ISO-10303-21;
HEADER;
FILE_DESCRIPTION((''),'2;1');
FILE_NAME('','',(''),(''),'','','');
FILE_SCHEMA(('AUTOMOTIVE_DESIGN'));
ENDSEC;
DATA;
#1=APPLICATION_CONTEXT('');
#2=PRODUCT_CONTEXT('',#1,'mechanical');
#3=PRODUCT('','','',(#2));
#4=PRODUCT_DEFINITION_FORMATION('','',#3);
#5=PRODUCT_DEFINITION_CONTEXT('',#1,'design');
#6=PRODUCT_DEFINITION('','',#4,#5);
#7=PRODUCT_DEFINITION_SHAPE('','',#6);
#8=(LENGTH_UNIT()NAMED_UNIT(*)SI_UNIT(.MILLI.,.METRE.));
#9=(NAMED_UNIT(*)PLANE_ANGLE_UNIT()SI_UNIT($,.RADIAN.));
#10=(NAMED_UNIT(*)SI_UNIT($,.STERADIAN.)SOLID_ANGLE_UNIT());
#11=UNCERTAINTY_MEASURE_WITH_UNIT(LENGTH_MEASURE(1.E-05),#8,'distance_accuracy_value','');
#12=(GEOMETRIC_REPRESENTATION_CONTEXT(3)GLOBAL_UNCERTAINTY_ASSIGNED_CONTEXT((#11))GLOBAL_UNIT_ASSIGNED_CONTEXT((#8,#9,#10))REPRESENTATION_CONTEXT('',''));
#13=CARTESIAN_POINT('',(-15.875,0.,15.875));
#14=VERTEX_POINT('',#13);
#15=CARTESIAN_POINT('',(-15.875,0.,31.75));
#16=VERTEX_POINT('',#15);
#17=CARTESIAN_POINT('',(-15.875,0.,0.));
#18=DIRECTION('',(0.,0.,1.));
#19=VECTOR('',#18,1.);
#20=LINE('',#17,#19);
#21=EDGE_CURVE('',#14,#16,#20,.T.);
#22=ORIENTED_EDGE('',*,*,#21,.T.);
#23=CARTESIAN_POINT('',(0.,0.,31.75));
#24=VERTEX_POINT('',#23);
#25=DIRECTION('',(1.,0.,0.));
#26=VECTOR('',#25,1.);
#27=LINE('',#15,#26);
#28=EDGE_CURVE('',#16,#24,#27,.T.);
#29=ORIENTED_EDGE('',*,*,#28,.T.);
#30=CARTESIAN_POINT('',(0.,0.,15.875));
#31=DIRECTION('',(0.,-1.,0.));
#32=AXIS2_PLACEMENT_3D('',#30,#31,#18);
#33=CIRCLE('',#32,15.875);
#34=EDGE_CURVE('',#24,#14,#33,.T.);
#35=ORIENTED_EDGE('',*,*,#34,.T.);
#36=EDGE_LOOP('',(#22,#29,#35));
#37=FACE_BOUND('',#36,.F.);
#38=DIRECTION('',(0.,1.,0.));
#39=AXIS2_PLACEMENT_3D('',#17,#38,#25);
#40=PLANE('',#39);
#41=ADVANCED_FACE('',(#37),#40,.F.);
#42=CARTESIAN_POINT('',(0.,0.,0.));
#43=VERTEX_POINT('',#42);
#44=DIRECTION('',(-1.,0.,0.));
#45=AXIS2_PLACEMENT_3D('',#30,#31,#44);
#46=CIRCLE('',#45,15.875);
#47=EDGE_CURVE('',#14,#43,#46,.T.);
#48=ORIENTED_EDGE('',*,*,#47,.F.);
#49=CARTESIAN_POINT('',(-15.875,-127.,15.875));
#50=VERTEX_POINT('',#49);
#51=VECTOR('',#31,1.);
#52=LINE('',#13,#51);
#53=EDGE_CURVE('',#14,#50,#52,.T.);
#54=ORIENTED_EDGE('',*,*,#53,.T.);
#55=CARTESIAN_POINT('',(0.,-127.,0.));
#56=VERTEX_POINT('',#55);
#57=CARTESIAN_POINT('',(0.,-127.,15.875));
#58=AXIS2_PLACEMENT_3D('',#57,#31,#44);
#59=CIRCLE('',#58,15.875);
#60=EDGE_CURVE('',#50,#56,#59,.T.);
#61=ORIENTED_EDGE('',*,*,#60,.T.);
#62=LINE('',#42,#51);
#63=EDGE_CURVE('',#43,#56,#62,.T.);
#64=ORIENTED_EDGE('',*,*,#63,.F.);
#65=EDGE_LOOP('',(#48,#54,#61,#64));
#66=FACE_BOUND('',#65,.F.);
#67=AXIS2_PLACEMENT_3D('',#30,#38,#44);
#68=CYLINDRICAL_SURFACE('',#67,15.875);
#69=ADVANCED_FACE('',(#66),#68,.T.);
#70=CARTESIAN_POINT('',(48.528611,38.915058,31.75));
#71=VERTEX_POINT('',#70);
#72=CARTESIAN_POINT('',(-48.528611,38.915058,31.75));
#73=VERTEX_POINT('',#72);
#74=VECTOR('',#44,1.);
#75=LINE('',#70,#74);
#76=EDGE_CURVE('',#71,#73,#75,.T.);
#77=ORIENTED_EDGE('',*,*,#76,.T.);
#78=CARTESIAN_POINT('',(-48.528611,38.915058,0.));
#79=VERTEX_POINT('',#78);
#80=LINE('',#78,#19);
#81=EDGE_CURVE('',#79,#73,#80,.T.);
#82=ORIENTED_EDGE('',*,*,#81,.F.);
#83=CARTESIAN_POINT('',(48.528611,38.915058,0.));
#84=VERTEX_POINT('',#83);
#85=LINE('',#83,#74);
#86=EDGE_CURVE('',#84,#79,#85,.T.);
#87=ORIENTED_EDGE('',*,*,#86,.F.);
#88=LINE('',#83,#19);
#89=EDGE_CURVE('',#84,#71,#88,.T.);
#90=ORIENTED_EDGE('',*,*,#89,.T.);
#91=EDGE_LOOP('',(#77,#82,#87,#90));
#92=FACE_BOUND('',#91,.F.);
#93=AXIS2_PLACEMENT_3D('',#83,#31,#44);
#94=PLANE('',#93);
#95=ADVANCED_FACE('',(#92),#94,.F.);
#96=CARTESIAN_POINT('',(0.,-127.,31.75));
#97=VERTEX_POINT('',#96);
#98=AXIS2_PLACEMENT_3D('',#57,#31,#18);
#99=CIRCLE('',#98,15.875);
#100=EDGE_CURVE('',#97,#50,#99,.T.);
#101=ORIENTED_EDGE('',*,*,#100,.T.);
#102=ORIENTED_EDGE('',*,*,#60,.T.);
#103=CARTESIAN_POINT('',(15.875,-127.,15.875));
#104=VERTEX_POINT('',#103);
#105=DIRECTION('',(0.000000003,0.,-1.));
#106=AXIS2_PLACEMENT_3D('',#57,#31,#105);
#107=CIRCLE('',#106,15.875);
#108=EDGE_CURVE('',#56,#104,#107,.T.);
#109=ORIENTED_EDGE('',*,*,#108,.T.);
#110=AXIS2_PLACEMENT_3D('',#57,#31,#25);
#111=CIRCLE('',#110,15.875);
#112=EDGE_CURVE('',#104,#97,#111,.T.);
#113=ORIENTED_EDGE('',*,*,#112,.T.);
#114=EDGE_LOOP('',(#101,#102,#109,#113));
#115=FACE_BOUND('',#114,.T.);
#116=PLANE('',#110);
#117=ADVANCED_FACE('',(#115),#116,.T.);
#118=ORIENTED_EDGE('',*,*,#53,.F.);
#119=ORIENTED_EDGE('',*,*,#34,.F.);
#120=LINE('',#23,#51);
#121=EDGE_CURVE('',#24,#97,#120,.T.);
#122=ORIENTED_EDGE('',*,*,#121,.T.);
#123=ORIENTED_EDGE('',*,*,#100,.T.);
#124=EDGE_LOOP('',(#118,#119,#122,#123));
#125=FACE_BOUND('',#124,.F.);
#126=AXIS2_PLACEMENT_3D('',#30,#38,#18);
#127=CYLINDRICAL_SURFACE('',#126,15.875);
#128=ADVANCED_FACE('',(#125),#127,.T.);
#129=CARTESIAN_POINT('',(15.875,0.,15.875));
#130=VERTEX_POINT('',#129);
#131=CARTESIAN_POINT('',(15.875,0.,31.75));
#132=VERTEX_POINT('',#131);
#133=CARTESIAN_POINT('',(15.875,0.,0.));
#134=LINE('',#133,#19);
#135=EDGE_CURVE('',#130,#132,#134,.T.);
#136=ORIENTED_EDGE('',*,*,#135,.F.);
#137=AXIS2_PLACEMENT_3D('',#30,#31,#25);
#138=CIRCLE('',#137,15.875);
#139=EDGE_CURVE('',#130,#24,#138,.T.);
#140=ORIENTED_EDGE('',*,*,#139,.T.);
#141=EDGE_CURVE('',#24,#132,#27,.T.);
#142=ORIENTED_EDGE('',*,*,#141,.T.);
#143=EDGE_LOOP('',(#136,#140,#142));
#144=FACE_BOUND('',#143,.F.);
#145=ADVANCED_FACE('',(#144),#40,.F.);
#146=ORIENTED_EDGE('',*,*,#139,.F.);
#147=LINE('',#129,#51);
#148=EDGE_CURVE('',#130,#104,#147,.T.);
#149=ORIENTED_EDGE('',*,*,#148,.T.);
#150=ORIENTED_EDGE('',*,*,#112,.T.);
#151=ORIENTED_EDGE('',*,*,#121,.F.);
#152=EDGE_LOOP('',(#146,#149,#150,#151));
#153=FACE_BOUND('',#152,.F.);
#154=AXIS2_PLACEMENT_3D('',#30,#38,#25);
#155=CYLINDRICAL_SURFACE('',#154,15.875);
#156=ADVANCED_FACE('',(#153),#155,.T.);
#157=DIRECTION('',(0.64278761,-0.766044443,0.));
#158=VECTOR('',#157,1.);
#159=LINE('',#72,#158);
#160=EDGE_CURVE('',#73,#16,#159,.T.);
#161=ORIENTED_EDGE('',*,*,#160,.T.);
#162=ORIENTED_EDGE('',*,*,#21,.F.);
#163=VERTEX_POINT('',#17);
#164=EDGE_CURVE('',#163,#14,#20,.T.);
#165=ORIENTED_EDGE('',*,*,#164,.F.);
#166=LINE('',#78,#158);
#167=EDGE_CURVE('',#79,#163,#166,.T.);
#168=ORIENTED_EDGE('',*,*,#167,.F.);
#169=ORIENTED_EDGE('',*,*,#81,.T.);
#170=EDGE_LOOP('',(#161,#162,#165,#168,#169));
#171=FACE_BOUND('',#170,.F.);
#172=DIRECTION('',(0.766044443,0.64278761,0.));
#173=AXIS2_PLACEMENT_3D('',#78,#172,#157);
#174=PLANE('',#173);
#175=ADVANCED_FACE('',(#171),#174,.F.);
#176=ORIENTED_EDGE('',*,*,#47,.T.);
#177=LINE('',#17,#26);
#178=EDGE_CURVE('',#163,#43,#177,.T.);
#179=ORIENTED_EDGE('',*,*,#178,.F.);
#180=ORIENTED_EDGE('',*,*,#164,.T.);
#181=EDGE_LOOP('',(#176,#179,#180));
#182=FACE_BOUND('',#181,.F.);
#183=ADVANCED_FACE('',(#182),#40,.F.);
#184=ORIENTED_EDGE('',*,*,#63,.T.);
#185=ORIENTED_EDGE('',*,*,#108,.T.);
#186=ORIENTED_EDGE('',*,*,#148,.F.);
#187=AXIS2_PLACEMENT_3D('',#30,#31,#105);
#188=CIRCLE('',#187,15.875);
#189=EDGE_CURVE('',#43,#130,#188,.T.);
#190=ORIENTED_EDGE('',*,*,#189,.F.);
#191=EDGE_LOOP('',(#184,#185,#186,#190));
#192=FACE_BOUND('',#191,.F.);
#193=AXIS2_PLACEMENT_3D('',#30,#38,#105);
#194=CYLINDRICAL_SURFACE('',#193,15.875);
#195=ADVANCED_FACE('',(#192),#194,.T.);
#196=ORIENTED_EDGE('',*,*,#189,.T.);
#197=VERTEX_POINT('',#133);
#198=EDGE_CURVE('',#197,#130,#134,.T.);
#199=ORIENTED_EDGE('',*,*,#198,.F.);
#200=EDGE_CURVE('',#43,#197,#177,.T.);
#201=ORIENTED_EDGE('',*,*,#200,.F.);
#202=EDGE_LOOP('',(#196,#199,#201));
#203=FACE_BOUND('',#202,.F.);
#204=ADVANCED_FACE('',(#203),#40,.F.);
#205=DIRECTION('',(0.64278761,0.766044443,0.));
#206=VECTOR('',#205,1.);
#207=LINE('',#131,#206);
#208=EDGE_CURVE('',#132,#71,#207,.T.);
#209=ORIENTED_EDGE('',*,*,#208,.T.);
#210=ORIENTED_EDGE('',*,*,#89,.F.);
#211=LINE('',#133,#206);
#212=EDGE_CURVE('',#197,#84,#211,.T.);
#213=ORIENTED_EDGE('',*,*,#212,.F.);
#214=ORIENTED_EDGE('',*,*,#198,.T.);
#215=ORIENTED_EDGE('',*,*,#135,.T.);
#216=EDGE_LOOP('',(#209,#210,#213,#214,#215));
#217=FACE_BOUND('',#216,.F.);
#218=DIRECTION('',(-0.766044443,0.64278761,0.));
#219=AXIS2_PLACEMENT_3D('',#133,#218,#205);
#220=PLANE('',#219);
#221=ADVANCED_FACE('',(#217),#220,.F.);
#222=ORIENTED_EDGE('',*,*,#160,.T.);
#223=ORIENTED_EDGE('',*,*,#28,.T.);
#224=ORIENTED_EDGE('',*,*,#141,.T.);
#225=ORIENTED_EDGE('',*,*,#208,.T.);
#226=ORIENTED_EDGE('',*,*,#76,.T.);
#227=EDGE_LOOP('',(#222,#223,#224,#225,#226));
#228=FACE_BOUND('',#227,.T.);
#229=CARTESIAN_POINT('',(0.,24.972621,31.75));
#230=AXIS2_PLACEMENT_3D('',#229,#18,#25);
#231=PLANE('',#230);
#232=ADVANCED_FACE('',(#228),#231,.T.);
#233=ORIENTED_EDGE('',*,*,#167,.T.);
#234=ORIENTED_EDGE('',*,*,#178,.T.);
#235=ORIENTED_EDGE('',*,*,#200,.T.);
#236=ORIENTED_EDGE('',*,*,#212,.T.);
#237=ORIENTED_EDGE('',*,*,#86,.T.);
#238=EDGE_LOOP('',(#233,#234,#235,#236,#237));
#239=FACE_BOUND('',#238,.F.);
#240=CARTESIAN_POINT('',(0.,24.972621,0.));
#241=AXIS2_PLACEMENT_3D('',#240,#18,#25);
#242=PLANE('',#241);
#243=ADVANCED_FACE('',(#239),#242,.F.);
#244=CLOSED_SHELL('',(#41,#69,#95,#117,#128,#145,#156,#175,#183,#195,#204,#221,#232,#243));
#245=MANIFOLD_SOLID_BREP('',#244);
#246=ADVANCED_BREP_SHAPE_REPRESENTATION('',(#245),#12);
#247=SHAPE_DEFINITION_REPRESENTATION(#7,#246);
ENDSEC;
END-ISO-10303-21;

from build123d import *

# Parameters (mm, degrees)
F1_DEPTH = 31.75
F3_DEPTH = 127


# Not quite as in the source:
# - a feature names something its author has since deleted; it is built from what else it names


with BuildPart() as f1:
    # F0 (on Top) → F1 (new body)
    with BuildSketch(Plane.XY):
        Polygon((-48.5286105721, 38.9150577104), (-15.875, 0), (15.875, 0), (48.5286105721, 38.9150577104), align=None)
    extrude(amount=F1_DEPTH)

    # F2 (on face) → F3 (join)
    with BuildSketch(Plane.XZ):
        with BuildLine():
            ThreePointArc((5.44e-08, 0), (11.2253201706, 4.6496798679), (15.875, 15.875))
            ThreePointArc((15.875, 15.875), (11.2253201513, 27.1003201513), (0, 31.75))
            ThreePointArc((0, 31.75), (-11.2253201513, 27.1003201513), (-15.875, 15.875))
            ThreePointArc((-15.875, 15.875), (-11.2253201321, 4.6496798294), (5.44e-08, 0))
        make_face()
    extrude(amount=F3_DEPTH)


solid = f1.part
